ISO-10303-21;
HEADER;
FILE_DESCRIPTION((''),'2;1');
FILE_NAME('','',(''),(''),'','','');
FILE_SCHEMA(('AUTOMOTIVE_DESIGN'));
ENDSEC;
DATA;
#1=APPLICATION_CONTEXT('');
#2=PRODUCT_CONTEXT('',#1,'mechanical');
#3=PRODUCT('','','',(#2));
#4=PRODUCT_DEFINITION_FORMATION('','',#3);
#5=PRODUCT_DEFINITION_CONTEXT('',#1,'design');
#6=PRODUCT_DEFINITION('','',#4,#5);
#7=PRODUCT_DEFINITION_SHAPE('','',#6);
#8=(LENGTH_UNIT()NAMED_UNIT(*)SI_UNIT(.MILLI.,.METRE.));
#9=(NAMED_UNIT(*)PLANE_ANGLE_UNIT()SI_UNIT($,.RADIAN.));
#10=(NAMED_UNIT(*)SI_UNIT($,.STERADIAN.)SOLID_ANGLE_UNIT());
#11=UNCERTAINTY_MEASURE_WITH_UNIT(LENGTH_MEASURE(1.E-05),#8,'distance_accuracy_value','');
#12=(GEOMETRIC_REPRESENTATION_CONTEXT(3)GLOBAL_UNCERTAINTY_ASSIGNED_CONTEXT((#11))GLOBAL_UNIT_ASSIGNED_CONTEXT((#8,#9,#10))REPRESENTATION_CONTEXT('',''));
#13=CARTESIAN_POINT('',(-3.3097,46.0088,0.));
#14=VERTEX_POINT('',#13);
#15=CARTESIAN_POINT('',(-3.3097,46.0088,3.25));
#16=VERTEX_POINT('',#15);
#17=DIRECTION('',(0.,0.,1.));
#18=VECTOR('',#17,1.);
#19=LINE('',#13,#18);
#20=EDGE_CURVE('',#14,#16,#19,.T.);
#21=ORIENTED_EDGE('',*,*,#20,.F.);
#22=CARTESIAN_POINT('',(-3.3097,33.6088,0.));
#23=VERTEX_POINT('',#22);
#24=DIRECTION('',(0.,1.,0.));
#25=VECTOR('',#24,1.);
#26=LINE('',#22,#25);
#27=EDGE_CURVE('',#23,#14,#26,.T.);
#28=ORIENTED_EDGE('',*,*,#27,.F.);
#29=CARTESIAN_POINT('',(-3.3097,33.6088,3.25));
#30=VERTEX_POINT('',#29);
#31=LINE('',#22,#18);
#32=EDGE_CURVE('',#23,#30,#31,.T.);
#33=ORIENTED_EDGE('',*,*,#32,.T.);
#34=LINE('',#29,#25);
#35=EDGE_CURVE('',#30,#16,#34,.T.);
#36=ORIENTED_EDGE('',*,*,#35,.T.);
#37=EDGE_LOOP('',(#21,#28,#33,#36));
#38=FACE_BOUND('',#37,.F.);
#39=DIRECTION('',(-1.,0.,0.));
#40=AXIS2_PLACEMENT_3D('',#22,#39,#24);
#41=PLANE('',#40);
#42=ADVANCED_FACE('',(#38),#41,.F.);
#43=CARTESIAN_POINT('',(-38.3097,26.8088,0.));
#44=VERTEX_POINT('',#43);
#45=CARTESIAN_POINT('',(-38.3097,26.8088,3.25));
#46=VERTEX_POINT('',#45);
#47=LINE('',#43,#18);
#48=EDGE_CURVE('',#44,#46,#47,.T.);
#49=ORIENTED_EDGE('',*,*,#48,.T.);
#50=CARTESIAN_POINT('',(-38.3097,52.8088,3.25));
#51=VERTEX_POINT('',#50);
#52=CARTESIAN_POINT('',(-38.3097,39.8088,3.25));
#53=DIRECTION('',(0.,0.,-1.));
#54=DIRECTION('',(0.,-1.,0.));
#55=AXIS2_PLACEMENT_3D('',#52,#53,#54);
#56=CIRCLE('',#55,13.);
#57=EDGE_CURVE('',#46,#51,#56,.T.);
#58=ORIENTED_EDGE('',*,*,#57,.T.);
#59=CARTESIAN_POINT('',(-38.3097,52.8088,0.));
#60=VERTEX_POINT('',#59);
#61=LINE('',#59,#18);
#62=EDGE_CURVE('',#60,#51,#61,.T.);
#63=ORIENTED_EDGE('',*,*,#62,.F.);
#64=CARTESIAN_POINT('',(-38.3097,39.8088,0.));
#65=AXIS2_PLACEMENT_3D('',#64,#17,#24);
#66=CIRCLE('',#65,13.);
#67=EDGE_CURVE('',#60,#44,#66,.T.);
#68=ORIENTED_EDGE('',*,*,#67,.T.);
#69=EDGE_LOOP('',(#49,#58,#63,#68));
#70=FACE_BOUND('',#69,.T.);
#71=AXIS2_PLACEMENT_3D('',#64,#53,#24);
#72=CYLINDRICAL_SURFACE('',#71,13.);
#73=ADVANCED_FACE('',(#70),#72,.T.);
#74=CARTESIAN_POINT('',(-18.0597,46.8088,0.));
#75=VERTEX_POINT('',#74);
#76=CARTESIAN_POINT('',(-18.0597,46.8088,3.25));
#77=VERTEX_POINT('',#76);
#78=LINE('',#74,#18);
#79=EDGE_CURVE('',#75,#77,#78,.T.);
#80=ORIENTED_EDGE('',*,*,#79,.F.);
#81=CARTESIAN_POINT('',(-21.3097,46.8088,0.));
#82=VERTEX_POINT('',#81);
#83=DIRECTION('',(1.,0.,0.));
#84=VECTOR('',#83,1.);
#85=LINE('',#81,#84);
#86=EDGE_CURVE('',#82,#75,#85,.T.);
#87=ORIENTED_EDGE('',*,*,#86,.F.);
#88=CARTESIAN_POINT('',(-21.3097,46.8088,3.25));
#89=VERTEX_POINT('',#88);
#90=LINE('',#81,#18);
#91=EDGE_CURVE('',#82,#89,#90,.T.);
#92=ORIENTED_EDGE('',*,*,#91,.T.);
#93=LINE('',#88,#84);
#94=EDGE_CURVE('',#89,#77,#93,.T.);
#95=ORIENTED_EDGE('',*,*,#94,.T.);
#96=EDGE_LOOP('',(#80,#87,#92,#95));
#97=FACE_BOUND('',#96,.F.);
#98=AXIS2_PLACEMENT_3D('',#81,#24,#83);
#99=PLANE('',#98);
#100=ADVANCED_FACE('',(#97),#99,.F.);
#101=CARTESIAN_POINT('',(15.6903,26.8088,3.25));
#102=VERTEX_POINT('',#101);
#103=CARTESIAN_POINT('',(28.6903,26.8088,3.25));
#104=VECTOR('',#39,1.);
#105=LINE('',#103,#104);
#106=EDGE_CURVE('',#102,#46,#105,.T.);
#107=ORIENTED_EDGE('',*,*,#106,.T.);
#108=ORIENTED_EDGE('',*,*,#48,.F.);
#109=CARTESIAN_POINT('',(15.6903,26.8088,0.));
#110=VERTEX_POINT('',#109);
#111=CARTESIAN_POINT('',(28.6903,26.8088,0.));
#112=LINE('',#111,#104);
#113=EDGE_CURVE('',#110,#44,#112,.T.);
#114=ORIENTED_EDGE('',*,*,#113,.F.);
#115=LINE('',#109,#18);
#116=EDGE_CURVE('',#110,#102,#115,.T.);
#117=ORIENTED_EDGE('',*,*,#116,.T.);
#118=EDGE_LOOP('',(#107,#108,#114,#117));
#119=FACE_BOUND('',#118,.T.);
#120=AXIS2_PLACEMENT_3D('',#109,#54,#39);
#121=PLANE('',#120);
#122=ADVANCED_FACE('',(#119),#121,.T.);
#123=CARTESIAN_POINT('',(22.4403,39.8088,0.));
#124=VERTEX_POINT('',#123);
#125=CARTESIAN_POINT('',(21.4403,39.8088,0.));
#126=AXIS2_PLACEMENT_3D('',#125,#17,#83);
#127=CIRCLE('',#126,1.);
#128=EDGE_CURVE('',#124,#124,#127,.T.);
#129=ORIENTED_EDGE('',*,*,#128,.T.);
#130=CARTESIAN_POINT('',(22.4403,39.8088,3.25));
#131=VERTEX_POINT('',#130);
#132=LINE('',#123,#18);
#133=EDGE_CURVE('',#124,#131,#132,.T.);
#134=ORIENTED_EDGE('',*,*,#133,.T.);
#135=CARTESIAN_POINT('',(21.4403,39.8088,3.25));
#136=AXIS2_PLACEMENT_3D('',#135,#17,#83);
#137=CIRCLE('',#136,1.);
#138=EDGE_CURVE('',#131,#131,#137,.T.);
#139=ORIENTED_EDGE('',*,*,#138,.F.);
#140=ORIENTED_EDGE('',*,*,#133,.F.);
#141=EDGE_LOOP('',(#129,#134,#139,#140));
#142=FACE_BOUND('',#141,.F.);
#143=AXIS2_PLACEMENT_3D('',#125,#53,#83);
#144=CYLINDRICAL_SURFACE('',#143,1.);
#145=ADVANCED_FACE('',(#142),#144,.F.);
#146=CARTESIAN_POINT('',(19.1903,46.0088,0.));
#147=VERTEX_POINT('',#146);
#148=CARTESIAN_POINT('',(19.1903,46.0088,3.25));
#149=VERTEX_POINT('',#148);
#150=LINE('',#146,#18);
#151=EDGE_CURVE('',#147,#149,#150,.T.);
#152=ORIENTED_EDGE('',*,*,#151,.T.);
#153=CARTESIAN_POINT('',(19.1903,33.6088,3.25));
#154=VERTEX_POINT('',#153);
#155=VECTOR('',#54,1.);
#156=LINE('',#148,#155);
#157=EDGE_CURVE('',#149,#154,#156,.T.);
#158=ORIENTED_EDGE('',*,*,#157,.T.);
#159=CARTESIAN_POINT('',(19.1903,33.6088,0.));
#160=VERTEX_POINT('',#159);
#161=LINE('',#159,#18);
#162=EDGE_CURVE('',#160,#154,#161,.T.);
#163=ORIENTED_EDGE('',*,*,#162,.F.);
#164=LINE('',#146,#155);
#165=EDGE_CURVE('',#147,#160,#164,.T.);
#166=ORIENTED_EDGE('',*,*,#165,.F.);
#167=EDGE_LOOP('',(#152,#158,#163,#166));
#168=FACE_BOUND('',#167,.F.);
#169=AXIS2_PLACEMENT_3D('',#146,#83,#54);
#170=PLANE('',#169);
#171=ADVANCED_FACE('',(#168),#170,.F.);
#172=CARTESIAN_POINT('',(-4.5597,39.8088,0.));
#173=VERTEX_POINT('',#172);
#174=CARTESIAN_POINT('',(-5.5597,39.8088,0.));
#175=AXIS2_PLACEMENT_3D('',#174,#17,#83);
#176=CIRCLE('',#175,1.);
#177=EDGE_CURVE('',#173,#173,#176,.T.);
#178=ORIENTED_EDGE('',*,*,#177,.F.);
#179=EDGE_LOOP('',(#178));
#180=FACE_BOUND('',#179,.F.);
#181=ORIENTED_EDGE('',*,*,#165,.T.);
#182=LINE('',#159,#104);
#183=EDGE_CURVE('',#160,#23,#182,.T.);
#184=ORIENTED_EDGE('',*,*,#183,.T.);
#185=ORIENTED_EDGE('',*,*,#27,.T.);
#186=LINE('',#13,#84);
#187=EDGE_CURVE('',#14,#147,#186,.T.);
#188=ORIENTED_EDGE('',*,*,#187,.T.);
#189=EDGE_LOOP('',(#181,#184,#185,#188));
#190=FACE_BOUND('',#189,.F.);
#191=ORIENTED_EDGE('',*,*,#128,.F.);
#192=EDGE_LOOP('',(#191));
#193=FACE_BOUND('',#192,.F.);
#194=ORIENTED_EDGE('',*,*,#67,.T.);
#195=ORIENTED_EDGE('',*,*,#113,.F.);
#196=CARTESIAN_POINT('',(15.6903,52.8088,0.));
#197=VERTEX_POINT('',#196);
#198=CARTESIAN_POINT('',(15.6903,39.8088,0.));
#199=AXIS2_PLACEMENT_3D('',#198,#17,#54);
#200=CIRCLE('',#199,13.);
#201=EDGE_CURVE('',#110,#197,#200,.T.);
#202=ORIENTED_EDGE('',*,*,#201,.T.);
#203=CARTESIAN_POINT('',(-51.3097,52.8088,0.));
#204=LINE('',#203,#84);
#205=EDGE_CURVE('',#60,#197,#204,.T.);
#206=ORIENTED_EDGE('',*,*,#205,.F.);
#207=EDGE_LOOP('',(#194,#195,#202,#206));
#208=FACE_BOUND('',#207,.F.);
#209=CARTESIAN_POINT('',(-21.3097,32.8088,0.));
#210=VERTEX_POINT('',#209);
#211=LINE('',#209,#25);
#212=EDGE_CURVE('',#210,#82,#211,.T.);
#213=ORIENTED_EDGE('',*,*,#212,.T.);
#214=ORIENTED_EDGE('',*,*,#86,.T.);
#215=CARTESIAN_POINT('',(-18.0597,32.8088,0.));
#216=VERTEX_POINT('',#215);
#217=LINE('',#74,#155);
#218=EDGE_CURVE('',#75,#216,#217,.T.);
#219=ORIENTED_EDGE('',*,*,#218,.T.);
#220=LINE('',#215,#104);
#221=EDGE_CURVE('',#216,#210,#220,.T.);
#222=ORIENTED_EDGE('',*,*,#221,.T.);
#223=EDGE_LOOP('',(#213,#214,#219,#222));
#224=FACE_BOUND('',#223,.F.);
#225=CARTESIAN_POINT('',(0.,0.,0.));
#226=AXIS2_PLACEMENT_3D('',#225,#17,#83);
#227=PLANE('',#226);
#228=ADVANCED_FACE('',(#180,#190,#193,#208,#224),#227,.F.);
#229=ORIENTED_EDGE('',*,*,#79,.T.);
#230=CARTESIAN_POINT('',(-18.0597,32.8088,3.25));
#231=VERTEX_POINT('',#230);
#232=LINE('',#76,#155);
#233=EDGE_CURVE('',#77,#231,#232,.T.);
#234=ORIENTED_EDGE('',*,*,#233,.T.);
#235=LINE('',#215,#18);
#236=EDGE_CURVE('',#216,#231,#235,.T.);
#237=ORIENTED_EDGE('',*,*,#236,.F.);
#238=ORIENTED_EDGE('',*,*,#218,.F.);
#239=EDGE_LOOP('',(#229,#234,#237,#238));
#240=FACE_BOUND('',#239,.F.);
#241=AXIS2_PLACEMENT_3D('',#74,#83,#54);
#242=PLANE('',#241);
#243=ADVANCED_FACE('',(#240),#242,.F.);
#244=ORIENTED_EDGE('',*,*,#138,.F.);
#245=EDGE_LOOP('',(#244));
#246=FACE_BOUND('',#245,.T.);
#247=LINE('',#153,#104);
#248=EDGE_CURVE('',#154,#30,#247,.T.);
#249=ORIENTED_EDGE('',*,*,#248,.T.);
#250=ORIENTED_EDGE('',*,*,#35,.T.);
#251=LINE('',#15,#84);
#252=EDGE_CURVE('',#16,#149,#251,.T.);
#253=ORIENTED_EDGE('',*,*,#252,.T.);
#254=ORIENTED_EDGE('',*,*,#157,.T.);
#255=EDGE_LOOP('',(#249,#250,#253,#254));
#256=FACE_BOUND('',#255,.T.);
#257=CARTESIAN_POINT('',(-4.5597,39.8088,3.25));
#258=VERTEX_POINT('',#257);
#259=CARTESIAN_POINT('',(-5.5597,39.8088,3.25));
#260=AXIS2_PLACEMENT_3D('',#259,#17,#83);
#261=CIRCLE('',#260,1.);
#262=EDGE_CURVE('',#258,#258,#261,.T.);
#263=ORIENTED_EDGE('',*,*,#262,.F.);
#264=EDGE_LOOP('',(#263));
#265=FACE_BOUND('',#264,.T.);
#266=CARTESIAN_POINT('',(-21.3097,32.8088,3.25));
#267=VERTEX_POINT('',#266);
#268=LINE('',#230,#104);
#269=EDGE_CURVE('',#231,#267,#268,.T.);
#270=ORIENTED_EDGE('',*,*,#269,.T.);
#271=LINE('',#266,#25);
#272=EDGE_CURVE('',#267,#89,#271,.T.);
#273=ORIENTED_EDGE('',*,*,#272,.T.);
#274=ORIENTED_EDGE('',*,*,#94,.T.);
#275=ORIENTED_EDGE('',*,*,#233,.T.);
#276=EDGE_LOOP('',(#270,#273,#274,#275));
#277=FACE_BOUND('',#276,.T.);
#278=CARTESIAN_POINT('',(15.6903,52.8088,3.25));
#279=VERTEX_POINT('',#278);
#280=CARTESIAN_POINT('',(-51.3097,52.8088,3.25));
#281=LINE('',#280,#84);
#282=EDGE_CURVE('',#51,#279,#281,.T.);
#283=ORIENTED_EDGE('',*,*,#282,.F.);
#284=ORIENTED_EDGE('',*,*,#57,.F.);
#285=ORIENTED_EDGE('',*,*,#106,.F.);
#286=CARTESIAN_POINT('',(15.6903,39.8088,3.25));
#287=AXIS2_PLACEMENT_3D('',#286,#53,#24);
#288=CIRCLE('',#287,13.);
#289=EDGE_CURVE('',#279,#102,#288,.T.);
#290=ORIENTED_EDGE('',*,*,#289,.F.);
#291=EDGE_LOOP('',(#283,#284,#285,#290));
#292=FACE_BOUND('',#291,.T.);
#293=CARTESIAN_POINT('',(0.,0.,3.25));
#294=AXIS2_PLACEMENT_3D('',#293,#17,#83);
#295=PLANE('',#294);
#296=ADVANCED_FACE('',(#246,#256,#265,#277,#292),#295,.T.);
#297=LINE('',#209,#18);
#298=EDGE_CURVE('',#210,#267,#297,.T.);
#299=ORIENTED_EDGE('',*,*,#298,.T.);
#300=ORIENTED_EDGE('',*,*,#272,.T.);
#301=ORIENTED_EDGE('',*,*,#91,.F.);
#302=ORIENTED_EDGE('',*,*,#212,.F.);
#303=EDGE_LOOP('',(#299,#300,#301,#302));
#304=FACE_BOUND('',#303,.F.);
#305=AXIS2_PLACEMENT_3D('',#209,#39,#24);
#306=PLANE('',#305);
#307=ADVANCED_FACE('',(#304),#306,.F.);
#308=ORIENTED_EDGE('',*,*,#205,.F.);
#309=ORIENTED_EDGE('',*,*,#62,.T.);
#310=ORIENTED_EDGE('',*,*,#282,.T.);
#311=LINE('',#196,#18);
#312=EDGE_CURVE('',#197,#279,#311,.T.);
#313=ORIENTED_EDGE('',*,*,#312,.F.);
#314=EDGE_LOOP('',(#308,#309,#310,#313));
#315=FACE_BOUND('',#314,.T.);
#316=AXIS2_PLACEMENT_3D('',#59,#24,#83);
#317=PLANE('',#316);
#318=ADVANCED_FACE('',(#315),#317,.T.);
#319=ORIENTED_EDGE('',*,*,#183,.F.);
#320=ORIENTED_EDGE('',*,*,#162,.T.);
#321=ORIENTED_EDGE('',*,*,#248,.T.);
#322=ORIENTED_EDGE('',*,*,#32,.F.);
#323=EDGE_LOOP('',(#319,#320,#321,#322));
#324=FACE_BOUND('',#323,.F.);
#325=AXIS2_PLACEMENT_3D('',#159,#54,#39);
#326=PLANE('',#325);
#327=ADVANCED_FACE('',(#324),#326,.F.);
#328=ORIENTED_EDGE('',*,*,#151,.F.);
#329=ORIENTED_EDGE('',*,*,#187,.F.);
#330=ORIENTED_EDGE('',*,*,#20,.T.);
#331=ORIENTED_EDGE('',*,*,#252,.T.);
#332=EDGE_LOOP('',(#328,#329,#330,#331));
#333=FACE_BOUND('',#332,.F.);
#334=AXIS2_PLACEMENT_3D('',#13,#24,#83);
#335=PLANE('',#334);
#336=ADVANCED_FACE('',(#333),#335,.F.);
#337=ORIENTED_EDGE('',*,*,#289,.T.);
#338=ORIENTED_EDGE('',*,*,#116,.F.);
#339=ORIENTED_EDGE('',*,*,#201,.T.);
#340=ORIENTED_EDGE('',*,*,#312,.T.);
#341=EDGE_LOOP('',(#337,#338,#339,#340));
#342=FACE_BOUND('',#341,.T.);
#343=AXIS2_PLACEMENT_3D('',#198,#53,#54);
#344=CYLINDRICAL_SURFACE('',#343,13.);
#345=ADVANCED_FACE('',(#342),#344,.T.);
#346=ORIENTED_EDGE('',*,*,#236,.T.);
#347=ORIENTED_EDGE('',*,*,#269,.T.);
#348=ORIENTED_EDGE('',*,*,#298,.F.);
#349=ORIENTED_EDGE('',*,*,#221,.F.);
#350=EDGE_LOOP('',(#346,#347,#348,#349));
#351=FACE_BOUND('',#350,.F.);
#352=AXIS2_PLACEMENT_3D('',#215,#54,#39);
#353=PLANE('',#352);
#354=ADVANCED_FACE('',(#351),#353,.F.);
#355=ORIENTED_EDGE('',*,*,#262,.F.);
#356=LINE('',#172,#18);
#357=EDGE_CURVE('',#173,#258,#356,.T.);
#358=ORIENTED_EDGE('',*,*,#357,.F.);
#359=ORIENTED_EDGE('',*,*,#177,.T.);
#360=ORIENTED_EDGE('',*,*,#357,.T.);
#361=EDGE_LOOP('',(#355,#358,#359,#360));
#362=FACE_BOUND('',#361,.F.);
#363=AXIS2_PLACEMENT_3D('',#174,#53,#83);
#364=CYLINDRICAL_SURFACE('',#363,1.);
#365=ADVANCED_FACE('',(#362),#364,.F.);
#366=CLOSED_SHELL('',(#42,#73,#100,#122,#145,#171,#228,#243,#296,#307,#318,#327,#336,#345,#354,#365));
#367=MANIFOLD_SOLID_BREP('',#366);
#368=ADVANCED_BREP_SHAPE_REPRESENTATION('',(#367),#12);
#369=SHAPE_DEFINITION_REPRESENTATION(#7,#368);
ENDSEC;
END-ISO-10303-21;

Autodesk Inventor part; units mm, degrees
ref_plane "YZ Plane" through (0, 0, 0) normal (1, 0, 0) x (0, 1, 0)
ref_plane "XZ Plane" through (0, 0, 0) normal (0, 1, 0) x (-1, 0, 0)
ref_plane "XY Plane" through (0, 0, 0) normal (0, 0, 1) x (1, 0, 0)
sketch "Block1" plane through (0, 0, 0) normal (0, 0, 1) x (1, 0, 0)
  circle A0 centre (74.029, 24.2723) radius 1
  line L0 (49.279, 30.4723) -> (71.779, 30.4723)
  line L1 (71.779, 30.4723) -> (71.779, 18.0723)
  line L2 (71.779, 18.0723) -> (49.279, 18.0723)
  line L3 (49.279, 18.0723) -> (49.279, 30.4723)
  line L4 (49.279, 30.4723) -> (44.779, 30.4723)
  line L5 (44.779, 30.4723) -> (44.779, 18.0723)
  line L6 (44.779, 18.0723) -> (49.279, 18.0723)
  line L7 (49.279, 18.0723) -> (49.279, 30.4723)
  line L8 (71.779, 30.4723) -> (76.279, 30.4723)
  line L9 (76.279, 30.4723) -> (76.279, 18.0723)
  line L10 (76.279, 18.0723) -> (71.779, 18.0723)
  line L11 (71.779, 18.0723) -> (71.779, 30.4723)
  line L12 (44.779, 24.2723) -> (76.279, 24.2723) construction
  line L13 (47.029, 30.4723) -> (47.029, 18.0723) construction
  circle A1 centre (47.029, 24.2723) radius 1
  line L14 (74.029, 30.4723) -> (74.029, 18.0723) construction
  point P0 (60.979, 24.0984)
  dimension "d7" = 22.5
  dimension "d8" = 12.4
  dimension "d9" = 4.5
  dimension "d10" = 4.5
  dimension "d11" = 2
  dimension "d12" = 2
sketch "Sketch1" plane through (0, 0, 0) normal (0, 0, 1) x (1, 0, 0)
  line L0 (-92.7646, -8.503) -> (-89.7646, -8.503)
  line L1 (-89.7646, -8.503) -> (-89.7646, -11.753)
  line L2 (-89.7646, -11.753) -> (-92.7646, -11.753)
  line L3 (-92.7646, -11.753) -> (-92.7646, -8.503)
  line L4 (-92.7646, -21.6527) -> (-89.7646, -21.6527)
  line L5 (-89.7646, -21.6527) -> (-89.7646, -21.7527)
  line L6 (-89.7646, -21.7527) -> (-92.7646, -21.7527)
  line L7 (-92.7646, -21.7527) -> (-92.7646, -21.6527)
  line L8 (-51.3097, 52.8088) -> (28.6903, 52.8088)
  line L9 (28.6903, 52.8088) -> (28.6903, 26.8088)
  line L10 (28.6903, 26.8088) -> (-51.3097, 26.8088)
  line L11 (-51.3097, 26.8088) -> (-51.3097, 52.8088)
  line L12 (-51.3097, 39.8088) -> (28.6903, 39.8088) construction
  line L13 (-21.3097, 46.8088) -> (-18.0597, 46.8088)
  line L14 (-18.0597, 46.8088) -> (-18.0597, 32.8088)
  line L15 (-18.0597, 32.8088) -> (-21.3097, 32.8088)
  line L16 (-21.3097, 32.8088) -> (-21.3097, 46.8088)
  line L17 (-21.3097, 39.8088) -> (-18.0597, 39.8088) construction
  line L18 (-38.3097, 52.8088) -> (-38.3097, 26.8088) construction
  arc A0 (-38.3097, 52.8088) -> (-38.3097, 26.8088) centre (-38.3097, 39.8088) ccw
  line L19 (-11.3097, 52.8088) -> (-11.3097, 26.8088) construction
  line L20 (15.6903, 52.8088) -> (15.6903, 26.8088) construction
  arc A1 (15.6903, 26.8088) -> (15.6903, 52.8088) centre (15.6903, 39.8088) ccw
  circle A2 centre (-5.5597, 39.8088) radius 1
  line L21 (19.1903, 33.6088) -> (-3.3097, 33.6088)
  line L22 (-3.3097, 33.6088) -> (-3.3097, 46.0088)
  line L23 (-3.3097, 46.0088) -> (19.1903, 46.0088)
  line L24 (19.1903, 46.0088) -> (19.1903, 33.6088)
  line L25 (19.1903, 33.6088) -> (23.6903, 33.6088)
  line L26 (23.6903, 33.6088) -> (23.6903, 46.0088)
  line L27 (23.6903, 46.0088) -> (19.1903, 46.0088)
  line L28 (19.1903, 46.0088) -> (19.1903, 33.6088)
  line L29 (-3.3097, 33.6088) -> (-7.8097, 33.6088)
  line L30 (-7.8097, 33.6088) -> (-7.8097, 46.0088)
  line L31 (-7.8097, 46.0088) -> (-3.3097, 46.0088)
  line L32 (-3.3097, 46.0088) -> (-3.3097, 33.6088)
  line L33 (23.6903, 39.8088) -> (-7.8097, 39.8088) construction
  line L34 (21.4403, 33.6088) -> (21.4403, 46.0088) construction
  circle A3 centre (21.4403, 39.8088) radius 1
  line L35 (-5.5597, 33.6088) -> (-5.5597, 46.0088) construction
  point P0 (0, 0)
  dimension "d0" = 3
  dimension "mat" = 3.25
  dimension "d2" = 3
  dimension "d3" = 0.1
  dimension "d23" = 80
  dimension "d24" = 26
  dimension "d25" = 5
  dimension "d29" = 3.25
  dimension "d30" = 14
  dimension "d31" = 30
  dimension "d38" = 13
  dimension "d39" = 13
extrude "Extrusion5" add sketch "Sketch1" along normal blind 3.25 contours L8 A1 L10 A0 | L24 L27 L26 L25 | L29 L30 L31 L22
equation "\"d29\" = mat"
equation "\"d40\" = mat"
properties part number "arm-servo"
